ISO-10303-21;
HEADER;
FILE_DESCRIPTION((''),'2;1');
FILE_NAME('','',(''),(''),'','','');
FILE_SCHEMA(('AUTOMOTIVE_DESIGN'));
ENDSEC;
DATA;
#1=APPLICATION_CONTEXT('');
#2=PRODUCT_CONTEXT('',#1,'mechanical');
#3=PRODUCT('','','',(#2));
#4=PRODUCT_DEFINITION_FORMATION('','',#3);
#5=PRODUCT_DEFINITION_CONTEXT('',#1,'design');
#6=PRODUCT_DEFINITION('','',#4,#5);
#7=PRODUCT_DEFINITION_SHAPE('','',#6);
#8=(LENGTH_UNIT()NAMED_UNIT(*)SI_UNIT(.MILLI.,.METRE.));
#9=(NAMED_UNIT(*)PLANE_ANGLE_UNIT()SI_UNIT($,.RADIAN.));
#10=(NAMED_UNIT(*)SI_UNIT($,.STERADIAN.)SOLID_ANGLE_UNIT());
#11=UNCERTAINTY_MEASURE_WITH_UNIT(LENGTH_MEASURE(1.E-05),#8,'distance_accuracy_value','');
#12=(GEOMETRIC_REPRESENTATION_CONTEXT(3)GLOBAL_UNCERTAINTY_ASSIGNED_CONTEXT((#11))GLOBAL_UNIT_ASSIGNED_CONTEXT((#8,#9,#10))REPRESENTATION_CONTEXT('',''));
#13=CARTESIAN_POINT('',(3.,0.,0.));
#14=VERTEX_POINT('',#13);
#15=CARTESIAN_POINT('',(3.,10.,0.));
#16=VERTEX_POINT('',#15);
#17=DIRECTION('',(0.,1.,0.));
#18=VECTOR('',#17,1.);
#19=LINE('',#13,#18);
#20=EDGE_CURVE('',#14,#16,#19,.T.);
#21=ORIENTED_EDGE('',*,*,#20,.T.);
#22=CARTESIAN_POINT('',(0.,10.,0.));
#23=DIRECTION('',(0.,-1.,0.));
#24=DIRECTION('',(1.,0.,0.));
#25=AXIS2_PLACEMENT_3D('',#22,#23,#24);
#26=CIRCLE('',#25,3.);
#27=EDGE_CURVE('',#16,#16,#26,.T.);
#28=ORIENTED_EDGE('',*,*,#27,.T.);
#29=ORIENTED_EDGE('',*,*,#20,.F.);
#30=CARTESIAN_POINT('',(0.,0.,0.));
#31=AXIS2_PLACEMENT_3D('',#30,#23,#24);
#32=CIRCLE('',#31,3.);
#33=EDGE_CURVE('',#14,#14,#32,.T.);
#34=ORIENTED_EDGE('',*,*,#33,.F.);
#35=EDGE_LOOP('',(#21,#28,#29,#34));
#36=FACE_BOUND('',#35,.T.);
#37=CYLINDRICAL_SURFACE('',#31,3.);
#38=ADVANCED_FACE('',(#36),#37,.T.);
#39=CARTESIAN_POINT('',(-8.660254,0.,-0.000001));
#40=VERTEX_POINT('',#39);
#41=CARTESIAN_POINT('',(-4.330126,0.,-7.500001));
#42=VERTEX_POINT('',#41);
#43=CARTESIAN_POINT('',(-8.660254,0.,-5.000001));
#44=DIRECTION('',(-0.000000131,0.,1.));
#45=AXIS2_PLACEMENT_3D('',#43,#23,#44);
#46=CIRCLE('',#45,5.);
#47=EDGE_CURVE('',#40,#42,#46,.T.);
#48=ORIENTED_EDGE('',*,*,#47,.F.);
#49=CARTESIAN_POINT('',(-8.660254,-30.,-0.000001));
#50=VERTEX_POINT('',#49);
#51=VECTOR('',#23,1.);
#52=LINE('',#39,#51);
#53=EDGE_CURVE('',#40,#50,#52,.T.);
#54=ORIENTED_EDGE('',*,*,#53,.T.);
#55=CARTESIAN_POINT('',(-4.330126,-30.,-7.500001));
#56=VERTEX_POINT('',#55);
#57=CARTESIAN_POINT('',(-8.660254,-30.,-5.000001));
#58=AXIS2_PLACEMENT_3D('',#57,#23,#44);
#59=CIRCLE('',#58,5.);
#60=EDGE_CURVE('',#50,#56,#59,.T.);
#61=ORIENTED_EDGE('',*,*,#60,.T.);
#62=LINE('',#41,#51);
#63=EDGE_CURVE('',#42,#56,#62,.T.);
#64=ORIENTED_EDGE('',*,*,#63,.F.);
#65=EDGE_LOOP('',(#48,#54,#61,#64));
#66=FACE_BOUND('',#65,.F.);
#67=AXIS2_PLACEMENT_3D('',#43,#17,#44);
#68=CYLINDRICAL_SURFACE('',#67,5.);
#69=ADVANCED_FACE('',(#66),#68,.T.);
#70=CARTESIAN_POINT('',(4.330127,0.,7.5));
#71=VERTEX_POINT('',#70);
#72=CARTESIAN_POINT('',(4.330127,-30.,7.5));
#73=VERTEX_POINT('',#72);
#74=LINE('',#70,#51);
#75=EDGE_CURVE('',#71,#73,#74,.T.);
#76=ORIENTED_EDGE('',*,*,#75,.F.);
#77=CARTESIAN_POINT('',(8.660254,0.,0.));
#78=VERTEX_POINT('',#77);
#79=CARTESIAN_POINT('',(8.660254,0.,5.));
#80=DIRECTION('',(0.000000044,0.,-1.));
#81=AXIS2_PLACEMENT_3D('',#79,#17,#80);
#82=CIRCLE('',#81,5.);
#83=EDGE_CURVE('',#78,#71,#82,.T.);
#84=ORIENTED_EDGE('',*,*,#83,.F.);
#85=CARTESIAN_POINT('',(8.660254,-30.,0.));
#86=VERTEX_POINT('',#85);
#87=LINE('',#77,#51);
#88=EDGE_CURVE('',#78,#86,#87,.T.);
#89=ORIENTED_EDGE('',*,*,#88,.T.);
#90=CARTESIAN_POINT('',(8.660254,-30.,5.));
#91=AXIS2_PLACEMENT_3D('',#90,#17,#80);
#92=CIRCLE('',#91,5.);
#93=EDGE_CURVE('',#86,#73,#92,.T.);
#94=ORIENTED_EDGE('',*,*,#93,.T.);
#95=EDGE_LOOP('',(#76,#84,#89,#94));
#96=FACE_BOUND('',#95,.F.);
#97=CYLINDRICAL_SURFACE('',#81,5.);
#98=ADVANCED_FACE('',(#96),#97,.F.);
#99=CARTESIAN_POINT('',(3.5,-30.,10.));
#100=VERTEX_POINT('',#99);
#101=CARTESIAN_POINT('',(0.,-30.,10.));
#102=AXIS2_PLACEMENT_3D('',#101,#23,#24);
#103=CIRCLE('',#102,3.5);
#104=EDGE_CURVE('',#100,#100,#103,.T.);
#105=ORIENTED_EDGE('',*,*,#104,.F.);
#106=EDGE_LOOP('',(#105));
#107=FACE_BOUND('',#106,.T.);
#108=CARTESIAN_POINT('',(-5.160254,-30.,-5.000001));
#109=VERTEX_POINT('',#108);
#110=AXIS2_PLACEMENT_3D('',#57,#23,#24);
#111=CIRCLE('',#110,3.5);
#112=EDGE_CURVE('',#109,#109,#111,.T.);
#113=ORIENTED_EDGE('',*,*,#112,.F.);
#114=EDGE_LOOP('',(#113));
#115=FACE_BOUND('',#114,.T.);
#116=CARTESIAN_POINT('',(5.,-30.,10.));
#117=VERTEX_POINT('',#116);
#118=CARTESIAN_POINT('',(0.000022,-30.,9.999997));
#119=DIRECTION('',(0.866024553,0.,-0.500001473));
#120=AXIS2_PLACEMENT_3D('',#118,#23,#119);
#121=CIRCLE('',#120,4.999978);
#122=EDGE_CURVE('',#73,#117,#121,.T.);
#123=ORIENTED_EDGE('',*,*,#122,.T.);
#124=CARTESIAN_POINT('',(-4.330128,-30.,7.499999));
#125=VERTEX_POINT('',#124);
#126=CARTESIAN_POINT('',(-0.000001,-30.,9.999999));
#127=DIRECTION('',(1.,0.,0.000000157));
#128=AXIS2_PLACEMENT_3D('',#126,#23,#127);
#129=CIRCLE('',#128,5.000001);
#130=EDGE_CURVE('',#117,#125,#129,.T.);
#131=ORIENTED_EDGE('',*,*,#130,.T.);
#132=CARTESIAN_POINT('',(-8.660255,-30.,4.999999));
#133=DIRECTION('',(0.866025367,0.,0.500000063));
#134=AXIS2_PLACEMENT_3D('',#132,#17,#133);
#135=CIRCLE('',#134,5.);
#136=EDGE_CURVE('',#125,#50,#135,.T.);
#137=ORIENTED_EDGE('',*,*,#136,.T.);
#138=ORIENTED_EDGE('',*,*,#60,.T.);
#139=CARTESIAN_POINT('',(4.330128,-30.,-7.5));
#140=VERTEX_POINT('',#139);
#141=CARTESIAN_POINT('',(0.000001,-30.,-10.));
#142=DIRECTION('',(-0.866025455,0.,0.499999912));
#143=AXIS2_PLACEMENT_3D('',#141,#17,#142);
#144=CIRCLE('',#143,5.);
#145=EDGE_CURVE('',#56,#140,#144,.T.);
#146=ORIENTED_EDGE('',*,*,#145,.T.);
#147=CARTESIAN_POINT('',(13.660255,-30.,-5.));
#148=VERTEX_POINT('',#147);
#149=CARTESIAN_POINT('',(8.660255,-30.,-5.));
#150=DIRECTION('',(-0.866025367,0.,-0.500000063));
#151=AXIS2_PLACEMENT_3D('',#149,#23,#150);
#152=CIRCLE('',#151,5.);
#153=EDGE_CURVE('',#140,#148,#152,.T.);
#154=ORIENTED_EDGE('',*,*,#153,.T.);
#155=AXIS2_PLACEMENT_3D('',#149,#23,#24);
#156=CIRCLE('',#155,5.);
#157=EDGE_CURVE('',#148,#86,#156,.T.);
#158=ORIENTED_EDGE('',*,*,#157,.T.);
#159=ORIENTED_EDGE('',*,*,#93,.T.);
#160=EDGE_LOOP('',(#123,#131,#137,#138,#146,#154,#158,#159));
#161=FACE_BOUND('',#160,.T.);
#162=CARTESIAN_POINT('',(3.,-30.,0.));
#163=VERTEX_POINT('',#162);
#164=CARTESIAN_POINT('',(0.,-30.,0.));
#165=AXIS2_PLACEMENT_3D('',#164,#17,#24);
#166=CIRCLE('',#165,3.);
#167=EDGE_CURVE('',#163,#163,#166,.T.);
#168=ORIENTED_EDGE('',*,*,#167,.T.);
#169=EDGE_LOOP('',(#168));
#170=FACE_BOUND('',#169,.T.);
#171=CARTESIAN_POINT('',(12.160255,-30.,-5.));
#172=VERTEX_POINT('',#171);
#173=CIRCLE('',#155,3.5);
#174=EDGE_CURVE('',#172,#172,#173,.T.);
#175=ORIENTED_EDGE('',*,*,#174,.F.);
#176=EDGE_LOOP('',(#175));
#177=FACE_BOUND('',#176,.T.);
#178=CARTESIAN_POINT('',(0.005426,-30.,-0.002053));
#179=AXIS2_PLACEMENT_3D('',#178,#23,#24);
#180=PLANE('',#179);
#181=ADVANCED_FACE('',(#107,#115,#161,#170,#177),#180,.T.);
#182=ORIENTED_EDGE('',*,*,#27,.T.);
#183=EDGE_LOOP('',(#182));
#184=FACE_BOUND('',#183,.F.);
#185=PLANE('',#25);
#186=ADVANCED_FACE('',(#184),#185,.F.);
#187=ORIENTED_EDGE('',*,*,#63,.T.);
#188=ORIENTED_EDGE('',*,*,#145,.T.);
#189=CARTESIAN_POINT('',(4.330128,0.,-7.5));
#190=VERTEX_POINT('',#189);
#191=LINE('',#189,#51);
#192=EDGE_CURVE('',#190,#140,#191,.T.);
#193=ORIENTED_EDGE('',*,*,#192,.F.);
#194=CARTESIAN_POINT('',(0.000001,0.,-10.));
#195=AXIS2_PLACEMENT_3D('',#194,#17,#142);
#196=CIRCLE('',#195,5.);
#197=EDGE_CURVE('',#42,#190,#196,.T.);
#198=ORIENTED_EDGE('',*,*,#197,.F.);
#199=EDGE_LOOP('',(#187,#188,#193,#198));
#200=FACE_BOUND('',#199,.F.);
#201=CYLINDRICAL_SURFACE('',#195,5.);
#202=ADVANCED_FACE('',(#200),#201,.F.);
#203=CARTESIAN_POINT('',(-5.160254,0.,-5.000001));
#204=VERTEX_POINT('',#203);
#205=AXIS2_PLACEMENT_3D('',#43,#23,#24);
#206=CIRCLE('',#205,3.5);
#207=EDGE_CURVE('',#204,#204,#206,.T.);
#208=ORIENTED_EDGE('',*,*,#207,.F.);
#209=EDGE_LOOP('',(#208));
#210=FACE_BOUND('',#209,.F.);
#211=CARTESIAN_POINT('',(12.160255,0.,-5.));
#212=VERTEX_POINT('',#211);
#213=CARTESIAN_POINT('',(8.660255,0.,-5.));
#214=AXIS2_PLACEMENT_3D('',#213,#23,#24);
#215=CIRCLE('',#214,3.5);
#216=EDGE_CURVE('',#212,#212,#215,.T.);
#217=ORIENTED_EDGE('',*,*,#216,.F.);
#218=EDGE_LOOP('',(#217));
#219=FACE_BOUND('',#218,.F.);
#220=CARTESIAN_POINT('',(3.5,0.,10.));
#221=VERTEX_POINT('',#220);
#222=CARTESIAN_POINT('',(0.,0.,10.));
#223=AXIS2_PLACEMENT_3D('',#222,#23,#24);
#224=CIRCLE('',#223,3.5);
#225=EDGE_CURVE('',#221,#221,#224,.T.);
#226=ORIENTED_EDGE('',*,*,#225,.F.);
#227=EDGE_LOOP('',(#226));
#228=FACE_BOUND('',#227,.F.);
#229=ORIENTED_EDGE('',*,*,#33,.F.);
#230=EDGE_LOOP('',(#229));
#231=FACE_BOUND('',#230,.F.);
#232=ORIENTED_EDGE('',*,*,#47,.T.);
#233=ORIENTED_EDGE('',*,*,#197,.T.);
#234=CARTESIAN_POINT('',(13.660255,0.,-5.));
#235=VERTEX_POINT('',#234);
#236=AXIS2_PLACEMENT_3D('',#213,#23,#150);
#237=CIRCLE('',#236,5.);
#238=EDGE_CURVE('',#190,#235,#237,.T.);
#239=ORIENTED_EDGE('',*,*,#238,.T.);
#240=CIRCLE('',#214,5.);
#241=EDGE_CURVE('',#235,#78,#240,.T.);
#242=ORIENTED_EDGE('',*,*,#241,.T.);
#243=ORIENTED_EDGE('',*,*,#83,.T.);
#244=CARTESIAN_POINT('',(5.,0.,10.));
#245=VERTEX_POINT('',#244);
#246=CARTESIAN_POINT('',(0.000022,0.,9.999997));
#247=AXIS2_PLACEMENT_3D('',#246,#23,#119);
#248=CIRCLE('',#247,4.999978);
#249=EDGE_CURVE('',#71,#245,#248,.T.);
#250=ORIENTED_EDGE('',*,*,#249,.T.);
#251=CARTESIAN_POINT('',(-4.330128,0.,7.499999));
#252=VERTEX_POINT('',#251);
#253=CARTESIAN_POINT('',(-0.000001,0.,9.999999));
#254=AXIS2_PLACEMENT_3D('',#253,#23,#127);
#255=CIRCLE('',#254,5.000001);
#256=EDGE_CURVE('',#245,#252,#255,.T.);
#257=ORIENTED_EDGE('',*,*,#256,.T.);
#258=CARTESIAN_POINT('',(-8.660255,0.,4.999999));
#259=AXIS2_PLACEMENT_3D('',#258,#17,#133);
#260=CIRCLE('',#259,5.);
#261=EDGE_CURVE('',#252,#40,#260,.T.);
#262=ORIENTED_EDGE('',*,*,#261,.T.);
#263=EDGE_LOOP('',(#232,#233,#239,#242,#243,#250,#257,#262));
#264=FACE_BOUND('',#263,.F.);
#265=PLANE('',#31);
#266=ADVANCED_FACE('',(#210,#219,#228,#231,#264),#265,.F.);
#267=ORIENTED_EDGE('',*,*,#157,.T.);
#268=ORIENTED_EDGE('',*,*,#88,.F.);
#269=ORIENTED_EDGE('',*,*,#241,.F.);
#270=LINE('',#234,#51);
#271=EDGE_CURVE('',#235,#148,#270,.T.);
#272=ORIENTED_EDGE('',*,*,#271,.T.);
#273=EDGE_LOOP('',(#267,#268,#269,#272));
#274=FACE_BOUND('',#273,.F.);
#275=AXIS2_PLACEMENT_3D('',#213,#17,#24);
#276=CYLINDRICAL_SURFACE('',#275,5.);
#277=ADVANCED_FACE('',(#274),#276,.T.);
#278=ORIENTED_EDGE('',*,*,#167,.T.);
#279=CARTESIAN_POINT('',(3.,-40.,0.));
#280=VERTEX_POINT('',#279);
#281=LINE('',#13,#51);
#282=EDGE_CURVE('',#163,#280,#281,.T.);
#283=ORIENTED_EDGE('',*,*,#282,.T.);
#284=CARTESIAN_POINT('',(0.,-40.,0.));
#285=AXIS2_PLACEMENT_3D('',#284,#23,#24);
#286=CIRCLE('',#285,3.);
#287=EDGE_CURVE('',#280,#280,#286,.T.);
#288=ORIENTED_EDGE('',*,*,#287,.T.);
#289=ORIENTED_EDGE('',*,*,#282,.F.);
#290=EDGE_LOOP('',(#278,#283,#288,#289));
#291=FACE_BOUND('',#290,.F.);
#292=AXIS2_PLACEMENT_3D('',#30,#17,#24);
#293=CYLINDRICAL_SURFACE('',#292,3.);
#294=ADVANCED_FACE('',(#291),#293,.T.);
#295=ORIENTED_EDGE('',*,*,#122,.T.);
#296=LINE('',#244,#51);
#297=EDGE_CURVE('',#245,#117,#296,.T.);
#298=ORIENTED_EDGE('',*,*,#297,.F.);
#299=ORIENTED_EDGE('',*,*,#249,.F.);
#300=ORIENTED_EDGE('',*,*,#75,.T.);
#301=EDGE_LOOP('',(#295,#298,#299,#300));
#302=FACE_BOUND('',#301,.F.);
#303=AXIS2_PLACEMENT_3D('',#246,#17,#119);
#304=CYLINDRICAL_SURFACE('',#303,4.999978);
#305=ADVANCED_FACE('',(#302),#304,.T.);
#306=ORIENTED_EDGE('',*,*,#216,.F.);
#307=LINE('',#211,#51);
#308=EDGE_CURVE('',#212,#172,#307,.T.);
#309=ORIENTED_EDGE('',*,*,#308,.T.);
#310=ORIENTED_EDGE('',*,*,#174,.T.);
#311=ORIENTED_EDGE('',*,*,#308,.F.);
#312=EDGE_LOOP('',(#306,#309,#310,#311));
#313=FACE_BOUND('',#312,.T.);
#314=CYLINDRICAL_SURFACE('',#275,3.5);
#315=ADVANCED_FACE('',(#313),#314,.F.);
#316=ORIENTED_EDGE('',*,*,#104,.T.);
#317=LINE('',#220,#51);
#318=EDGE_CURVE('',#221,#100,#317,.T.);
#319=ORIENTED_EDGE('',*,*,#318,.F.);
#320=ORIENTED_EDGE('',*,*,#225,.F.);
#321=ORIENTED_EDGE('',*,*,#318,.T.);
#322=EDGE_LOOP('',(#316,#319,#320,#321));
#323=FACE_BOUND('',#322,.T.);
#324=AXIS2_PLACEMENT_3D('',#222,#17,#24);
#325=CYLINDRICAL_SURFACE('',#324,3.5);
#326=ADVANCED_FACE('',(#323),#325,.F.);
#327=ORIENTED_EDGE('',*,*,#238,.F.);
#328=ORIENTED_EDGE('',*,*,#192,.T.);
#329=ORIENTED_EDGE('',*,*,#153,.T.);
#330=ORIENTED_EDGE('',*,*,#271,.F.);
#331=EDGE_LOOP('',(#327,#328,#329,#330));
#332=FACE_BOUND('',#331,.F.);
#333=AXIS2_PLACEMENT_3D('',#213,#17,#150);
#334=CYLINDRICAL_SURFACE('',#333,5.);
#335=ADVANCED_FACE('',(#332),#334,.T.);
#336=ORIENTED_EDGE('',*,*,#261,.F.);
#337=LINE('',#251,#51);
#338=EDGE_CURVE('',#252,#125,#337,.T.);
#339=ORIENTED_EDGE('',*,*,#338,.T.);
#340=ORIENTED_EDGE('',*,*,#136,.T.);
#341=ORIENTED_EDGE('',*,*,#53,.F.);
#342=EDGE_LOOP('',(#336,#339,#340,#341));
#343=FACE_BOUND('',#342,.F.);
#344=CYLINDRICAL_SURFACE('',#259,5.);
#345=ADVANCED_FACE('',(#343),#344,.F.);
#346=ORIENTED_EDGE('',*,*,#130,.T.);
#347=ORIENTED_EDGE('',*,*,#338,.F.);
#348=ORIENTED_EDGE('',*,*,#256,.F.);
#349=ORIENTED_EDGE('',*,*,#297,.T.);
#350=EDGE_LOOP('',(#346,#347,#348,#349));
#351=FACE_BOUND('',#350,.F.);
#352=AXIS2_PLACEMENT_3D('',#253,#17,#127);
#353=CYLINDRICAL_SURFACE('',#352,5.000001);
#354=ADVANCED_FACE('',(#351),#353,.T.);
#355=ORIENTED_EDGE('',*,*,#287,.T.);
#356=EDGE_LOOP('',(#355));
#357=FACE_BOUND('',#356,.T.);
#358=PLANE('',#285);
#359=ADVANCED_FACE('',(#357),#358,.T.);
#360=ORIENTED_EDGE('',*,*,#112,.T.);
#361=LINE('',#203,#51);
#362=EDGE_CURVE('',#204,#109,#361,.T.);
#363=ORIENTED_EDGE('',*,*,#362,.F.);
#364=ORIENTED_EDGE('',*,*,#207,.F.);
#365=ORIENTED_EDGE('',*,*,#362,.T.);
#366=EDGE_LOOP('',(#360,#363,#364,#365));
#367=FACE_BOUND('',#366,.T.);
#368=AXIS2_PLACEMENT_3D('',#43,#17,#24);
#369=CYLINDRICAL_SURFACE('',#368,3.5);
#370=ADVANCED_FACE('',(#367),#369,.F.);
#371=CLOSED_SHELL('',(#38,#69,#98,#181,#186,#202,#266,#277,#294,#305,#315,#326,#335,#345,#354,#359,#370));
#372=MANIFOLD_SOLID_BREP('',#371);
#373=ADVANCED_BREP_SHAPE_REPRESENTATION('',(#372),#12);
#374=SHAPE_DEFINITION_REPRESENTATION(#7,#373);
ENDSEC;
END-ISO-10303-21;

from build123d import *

# Parameters (mm, degrees)
F0_R          = 3.5
F1_DEPTH      = 30
F2_R          = 3
F3_DEPTH      = 40
F3_DEPTH_BACK = 10


# Not quite as in the source:
# - ends of sketch curves that miss each other by under 0.0002 mm in the source are joined


with BuildPart() as f1:
    # F0 (on Front) → F1 (new body)
    with BuildSketch(Plane.XZ):
        with BuildLine():
            ThreePointArc((-4.3301281481, 7.4999991798), (-6.557e-07, 5.0000002524), (4.330125744, 7.5000010726))
            ThreePointArc((4.330125744, 7.5000010726), (4.8296291409, 8.705905062), (5, 10.0000002524))
            ThreePointArc((5, 10.0000002524), (-1.2940954014, 14.8296293367), (-4.3301281481, 7.4999991798))
        make_face()
        with Locations((0, 10.0000002524)):
            Circle(F0_R, mode=Mode.SUBTRACT)
        with BuildLine():
            ThreePointArc((8.6602543293, 3.786e-07), (4.3301271646, 2.5000002524), (4.3301270553, 7.5000003155))
            ThreePointArc((4.3301270553, 7.5000003155), (-6.557e-07, 5.0000002524), (-4.3301281481, 7.4999991798))
            ThreePointArc((-4.3301281481, 7.4999991798), (-4.330127711, 2.499999306), (-8.6602543293, -1.1357e-06))
            ThreePointArc((-8.6602543293, -1.1357e-06), (-5.1247199995, -1.4644669979), (-3.6602536736, -5.0000011357))
            ThreePointArc((-3.6602536736, -5.0000011357), (-3.8306244761, -6.2940961149), (-4.3301263997, -7.500000694))
            ThreePointArc((-4.3301263997, -7.500000694), (4.371e-07, -5.0000002524), (4.330127711, -7.4999999369))
            ThreePointArc((4.330127711, -7.4999999369), (4.3301273832, -2.4999998738), (8.6602543293, 3.786e-07))
        make_face()
        with BuildLine():
            ThreePointArc((13.6602545478, -4.9999996214), (12.1957883765, -1.4644656382), (8.6602543293, 3.786e-07))
            ThreePointArc((8.6602543293, 3.786e-07), (4.3301273832, -2.4999998738), (4.330127711, -7.4999999369))
            ThreePointArc((4.330127711, -7.4999999369), (9.9543499492, -9.8296287058), (13.6602545478, -4.9999996214))
        make_face()
        with Locations((8.6602545478, -4.9999996214)):
            Circle(F0_R, mode=Mode.SUBTRACT)
        with BuildLine():
            ThreePointArc((-3.6602536736, -5.0000011357), (-5.1247199995, -1.4644669979), (-8.6602543293, -1.1357e-06))
            ThreePointArc((-8.6602543293, -1.1357e-06), (-12.9903804011, -7.5000016404), (-4.3301263997, -7.500000694))
            ThreePointArc((-4.3301263997, -7.500000694), (-3.8306244761, -6.2940961149), (-3.6602536736, -5.0000011357))
        make_face()
        with Locations((-8.6602536736, -5.0000011357)):
            Circle(F0_R, mode=Mode.SUBTRACT)
    extrude(amount=F1_DEPTH)

    # F2 (on Front) → F3 (join, two sides)
    with BuildSketch(Plane.XZ) as f3_sk:
        Circle(F2_R)
    extrude(amount=F3_DEPTH)
    extrude(f3_sk.sketch, amount=-F3_DEPTH_BACK)


solid = f1.part
